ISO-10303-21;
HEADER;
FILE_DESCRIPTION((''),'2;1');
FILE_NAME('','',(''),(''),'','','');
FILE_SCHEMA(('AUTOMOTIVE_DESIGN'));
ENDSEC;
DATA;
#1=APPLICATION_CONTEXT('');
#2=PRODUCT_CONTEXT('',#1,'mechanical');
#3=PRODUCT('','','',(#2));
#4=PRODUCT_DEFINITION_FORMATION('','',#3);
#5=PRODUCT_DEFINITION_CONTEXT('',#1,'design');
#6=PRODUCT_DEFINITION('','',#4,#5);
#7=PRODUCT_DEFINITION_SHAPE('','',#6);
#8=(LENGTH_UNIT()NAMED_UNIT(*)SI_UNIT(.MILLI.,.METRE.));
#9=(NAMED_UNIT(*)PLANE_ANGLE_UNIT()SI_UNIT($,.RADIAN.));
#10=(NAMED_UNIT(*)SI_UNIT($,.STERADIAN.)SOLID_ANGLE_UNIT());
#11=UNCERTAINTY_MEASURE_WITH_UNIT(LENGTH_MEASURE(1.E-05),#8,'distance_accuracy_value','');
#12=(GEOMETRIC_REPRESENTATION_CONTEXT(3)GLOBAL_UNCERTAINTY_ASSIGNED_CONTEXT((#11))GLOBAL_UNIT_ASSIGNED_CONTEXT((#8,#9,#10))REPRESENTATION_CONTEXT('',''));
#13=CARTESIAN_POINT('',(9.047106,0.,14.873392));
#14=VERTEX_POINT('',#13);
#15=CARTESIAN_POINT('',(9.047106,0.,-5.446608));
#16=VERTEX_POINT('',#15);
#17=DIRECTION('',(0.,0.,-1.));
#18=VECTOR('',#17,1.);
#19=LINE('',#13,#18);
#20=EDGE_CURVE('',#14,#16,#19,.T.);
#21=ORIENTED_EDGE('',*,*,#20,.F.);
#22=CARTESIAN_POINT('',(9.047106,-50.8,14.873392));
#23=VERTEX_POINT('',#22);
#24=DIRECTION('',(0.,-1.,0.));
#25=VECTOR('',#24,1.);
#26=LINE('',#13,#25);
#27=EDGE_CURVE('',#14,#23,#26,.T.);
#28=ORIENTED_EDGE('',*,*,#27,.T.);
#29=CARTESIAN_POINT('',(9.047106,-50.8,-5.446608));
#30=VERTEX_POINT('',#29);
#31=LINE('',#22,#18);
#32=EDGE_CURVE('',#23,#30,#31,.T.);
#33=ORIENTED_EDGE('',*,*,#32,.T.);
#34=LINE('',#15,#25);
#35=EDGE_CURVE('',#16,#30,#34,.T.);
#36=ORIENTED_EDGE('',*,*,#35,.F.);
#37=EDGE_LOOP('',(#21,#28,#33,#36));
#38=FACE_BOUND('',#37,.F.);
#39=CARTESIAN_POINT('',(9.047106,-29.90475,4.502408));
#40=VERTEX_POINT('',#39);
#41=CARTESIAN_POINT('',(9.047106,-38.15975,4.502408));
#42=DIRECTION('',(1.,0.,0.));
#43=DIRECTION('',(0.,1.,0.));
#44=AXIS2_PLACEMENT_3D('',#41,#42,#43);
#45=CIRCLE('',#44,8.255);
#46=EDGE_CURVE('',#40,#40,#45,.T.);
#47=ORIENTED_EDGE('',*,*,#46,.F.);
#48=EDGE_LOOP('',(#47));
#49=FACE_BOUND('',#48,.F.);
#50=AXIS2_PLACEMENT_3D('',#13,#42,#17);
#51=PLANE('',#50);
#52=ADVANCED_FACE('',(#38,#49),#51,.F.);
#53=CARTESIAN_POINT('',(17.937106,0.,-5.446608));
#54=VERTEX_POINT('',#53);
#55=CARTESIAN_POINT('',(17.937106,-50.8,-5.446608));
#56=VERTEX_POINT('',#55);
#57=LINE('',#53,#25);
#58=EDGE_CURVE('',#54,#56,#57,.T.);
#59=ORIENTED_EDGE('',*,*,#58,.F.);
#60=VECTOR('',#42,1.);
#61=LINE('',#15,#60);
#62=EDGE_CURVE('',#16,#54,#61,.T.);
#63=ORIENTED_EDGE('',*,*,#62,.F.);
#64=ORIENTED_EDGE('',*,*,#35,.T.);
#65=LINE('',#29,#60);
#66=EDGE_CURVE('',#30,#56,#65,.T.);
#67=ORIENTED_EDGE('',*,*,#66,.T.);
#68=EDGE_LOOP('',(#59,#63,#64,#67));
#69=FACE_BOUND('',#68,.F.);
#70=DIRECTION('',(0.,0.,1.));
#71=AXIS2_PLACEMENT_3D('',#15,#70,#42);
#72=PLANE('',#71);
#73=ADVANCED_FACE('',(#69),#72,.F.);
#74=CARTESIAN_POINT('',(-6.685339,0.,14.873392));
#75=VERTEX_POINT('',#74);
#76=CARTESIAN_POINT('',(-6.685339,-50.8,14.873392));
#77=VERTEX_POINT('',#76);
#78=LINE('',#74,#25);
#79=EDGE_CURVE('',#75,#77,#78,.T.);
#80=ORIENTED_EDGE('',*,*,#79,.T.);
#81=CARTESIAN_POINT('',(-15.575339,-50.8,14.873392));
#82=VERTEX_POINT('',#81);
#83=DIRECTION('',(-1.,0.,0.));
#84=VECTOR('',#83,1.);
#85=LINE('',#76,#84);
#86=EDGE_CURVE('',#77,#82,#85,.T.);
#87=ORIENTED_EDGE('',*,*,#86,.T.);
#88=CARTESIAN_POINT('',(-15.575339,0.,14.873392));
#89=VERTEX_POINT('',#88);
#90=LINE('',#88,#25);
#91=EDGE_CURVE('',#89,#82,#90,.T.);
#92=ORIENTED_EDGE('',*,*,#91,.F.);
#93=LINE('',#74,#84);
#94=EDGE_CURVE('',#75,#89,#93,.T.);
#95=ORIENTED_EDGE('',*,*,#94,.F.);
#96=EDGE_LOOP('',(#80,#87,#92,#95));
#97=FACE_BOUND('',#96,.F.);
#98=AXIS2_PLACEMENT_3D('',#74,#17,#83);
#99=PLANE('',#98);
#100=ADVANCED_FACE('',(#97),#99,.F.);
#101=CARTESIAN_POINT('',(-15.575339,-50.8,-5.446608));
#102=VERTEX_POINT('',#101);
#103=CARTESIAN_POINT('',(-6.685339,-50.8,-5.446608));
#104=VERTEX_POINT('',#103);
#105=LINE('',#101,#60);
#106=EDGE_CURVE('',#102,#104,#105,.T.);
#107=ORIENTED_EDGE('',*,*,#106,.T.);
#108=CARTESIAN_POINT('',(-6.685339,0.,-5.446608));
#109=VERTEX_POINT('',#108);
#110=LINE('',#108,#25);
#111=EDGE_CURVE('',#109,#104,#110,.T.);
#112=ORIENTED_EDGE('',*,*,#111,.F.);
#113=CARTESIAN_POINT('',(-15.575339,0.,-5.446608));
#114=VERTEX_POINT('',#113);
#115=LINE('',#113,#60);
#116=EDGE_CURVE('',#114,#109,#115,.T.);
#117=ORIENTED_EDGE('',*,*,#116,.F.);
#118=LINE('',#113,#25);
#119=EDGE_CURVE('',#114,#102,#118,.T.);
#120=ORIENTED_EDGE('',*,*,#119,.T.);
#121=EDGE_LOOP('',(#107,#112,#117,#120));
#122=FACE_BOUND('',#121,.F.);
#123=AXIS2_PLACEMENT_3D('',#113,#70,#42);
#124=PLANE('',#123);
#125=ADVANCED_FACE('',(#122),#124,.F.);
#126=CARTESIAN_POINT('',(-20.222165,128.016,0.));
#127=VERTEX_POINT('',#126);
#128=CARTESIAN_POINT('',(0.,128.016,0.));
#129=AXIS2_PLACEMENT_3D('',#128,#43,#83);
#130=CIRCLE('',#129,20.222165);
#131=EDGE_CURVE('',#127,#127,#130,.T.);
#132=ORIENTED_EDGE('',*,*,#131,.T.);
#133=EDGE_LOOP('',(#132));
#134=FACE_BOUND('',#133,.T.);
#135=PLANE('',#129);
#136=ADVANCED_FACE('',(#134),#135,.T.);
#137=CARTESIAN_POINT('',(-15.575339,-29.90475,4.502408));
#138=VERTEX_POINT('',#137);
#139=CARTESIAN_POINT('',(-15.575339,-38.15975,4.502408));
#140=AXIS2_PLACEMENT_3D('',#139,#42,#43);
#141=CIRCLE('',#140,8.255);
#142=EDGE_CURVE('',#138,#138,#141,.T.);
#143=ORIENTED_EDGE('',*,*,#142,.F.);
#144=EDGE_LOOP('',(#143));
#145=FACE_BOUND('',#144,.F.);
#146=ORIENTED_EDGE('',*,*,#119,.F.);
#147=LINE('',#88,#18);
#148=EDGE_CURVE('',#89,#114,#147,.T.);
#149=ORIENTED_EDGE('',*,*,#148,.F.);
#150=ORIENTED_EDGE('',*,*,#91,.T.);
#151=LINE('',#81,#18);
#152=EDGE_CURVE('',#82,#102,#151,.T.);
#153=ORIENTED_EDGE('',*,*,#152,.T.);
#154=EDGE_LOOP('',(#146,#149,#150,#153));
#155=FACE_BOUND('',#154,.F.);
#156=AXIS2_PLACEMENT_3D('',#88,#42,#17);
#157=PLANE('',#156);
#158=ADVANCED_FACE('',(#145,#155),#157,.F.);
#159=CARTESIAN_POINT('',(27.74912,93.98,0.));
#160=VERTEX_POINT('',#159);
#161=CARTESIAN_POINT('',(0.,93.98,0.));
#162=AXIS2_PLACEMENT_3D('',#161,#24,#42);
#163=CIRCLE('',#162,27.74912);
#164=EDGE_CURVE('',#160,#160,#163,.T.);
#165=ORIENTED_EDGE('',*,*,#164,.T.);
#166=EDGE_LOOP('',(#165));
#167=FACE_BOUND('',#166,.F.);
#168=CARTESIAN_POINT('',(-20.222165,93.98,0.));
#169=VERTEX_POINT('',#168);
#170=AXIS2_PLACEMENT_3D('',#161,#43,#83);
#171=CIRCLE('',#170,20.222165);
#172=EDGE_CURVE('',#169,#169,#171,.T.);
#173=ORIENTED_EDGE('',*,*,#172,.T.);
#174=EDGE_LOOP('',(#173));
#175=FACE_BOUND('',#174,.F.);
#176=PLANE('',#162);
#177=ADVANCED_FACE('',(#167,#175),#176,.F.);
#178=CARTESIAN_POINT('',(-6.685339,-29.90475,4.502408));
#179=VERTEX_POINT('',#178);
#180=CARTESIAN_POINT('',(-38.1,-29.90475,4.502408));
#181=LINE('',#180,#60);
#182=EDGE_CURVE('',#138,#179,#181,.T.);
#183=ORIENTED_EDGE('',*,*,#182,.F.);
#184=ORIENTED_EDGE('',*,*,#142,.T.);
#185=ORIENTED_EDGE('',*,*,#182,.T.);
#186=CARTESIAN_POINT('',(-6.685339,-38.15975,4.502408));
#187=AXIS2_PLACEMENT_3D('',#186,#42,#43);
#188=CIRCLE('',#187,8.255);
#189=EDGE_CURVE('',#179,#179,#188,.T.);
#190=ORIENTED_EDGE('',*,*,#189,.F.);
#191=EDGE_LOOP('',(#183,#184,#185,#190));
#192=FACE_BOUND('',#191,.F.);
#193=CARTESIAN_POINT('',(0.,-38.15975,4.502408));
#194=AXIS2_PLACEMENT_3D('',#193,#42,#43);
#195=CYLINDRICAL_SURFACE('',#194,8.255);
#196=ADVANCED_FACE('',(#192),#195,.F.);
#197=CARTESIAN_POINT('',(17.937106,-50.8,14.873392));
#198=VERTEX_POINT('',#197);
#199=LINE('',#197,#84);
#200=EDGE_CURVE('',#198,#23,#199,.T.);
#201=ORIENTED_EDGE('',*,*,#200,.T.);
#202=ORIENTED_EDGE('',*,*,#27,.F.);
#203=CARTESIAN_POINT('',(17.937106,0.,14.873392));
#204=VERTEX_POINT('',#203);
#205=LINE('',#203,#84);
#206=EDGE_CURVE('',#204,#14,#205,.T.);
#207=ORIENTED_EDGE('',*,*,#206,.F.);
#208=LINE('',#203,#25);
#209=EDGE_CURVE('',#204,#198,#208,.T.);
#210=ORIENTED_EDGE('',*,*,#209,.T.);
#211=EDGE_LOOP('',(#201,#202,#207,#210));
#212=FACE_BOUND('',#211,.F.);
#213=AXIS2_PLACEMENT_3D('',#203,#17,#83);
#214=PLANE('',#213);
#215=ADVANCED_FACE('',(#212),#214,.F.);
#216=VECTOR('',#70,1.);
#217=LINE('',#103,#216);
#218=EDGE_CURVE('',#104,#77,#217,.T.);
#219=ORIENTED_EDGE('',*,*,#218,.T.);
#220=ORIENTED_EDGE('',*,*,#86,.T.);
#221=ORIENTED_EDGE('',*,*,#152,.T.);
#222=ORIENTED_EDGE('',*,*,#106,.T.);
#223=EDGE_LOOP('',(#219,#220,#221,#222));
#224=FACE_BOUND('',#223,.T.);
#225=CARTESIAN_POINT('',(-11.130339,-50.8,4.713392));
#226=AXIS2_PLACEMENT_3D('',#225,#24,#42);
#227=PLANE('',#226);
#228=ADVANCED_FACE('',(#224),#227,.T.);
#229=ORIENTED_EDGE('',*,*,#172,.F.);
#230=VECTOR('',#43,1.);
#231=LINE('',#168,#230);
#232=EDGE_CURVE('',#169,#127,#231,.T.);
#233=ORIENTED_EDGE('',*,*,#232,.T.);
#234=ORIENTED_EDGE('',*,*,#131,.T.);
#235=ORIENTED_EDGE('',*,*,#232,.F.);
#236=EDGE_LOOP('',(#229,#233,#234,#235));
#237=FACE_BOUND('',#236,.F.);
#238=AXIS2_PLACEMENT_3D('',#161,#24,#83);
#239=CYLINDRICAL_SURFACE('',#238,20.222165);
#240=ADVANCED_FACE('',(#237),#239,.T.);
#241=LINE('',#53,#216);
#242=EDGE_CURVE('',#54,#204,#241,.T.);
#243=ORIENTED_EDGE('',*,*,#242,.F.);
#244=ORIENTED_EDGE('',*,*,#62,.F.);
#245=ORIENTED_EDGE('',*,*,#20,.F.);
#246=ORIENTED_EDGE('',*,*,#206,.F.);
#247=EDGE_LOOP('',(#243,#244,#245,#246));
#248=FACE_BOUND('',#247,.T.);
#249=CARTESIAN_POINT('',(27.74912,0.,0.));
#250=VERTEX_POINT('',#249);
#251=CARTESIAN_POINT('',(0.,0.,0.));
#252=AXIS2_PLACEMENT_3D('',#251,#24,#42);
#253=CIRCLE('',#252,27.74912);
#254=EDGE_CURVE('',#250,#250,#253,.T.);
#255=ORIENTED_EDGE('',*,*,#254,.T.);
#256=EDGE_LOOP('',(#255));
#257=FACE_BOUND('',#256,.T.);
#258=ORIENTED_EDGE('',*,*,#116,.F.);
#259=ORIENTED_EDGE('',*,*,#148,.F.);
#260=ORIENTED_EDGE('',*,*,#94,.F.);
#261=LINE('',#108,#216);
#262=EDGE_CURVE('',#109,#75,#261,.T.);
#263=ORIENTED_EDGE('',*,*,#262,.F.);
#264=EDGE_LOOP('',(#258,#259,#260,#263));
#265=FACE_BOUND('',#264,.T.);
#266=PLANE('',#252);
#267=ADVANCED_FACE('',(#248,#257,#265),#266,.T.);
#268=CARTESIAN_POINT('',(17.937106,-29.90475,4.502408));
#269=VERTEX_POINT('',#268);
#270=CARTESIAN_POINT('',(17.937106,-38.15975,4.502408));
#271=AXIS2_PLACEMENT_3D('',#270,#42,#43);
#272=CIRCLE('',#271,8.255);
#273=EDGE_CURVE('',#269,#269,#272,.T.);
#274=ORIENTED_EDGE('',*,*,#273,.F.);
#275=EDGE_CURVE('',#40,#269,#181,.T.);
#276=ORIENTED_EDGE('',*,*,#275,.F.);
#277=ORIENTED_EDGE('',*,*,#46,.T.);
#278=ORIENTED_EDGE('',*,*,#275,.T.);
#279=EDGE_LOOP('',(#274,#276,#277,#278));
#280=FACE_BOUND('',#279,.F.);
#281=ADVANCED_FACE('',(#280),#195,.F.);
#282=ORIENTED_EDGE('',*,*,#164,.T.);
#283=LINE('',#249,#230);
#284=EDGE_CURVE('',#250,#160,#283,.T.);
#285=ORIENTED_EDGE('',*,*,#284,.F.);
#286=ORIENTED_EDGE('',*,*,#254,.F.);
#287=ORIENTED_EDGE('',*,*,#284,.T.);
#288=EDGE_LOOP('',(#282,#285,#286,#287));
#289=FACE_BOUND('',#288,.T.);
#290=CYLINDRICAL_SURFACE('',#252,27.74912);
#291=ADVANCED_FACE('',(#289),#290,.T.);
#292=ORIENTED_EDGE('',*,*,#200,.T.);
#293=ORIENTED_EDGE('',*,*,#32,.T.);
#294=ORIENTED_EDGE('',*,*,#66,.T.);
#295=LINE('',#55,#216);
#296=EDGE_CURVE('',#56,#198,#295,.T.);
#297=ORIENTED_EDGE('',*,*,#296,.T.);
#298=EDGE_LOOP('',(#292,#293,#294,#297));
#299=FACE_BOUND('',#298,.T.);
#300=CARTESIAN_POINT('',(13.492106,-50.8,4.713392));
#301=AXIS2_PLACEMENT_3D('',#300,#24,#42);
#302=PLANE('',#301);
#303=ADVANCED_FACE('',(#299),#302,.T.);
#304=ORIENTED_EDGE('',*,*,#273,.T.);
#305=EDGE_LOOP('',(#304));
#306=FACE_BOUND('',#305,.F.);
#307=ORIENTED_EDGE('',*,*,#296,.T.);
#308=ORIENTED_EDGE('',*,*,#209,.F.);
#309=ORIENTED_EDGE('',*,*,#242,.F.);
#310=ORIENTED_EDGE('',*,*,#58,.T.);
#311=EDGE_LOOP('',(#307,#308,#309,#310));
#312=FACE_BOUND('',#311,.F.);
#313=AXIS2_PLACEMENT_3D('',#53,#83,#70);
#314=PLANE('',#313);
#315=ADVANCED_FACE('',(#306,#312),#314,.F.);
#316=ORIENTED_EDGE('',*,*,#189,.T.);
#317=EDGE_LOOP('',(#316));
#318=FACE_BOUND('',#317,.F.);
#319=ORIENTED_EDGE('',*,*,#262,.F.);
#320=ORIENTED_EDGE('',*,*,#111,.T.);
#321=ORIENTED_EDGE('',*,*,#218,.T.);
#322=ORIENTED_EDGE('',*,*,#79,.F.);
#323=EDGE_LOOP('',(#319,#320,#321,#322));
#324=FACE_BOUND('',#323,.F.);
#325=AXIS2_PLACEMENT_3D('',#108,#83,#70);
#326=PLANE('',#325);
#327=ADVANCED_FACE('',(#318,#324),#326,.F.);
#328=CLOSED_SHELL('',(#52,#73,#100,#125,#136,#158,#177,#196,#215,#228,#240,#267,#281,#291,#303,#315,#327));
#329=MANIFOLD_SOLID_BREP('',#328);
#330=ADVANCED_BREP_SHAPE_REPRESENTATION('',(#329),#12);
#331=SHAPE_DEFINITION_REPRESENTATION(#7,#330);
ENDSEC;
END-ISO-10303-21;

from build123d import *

# Parameters (mm, degrees)
F0_R     = 27.7491203527
F1_DEPTH = 93.98
F2_R     = 20.2221650078
F3_DEPTH = 34.036
F5_DEPTH = 50.8
F6_R     = 8.255
F8_DEPTH = 38.1


# Not quite as in the source:
# - the program builds the solid bodies; features that only make, move or delete a surface that nothing else refers to are left out


with BuildPart() as f1:
    # F0 (on Front) → F1 (new body)
    with BuildSketch(Plane.XZ):
        Circle(F0_R)
    extrude(amount=-F1_DEPTH)

    # F2 (on face) → F3 (join)
    with BuildSketch(Plane(origin=(0, 93.98, 0), x_dir=(-1, 0, 0), z_dir=(0, 1, 0))):
        Circle(F2_R)
    extrude(amount=F3_DEPTH)

    # F4 (on Front) → F5 (join)
    with BuildSketch(Plane.XZ):
        Polygon((-6.6853386185, -5.4466079127), (-6.6853386185, 0), (-6.6853386185, 14.8733920873), (-15.5753386185, 14.8733920873), (-15.5753386185, -5.4466079127), align=None)
        Polygon((9.04710629, 14.8733920873), (9.04710629, 0), (9.04710629, -5.4466079127), (17.93710629, -5.4466079127), (17.93710629, 14.8733920873), align=None)
    extrude(amount=F5_DEPTH)

    # F6 (on Right) → F8 (cut, symmetric)
    with BuildSketch(Plane.YZ):
        with Locations((-38.159750402, 4.5024077408)):
            Circle(F6_R)
    extrude(amount=F8_DEPTH, both=True, mode=Mode.SUBTRACT)


solid = f1.part
